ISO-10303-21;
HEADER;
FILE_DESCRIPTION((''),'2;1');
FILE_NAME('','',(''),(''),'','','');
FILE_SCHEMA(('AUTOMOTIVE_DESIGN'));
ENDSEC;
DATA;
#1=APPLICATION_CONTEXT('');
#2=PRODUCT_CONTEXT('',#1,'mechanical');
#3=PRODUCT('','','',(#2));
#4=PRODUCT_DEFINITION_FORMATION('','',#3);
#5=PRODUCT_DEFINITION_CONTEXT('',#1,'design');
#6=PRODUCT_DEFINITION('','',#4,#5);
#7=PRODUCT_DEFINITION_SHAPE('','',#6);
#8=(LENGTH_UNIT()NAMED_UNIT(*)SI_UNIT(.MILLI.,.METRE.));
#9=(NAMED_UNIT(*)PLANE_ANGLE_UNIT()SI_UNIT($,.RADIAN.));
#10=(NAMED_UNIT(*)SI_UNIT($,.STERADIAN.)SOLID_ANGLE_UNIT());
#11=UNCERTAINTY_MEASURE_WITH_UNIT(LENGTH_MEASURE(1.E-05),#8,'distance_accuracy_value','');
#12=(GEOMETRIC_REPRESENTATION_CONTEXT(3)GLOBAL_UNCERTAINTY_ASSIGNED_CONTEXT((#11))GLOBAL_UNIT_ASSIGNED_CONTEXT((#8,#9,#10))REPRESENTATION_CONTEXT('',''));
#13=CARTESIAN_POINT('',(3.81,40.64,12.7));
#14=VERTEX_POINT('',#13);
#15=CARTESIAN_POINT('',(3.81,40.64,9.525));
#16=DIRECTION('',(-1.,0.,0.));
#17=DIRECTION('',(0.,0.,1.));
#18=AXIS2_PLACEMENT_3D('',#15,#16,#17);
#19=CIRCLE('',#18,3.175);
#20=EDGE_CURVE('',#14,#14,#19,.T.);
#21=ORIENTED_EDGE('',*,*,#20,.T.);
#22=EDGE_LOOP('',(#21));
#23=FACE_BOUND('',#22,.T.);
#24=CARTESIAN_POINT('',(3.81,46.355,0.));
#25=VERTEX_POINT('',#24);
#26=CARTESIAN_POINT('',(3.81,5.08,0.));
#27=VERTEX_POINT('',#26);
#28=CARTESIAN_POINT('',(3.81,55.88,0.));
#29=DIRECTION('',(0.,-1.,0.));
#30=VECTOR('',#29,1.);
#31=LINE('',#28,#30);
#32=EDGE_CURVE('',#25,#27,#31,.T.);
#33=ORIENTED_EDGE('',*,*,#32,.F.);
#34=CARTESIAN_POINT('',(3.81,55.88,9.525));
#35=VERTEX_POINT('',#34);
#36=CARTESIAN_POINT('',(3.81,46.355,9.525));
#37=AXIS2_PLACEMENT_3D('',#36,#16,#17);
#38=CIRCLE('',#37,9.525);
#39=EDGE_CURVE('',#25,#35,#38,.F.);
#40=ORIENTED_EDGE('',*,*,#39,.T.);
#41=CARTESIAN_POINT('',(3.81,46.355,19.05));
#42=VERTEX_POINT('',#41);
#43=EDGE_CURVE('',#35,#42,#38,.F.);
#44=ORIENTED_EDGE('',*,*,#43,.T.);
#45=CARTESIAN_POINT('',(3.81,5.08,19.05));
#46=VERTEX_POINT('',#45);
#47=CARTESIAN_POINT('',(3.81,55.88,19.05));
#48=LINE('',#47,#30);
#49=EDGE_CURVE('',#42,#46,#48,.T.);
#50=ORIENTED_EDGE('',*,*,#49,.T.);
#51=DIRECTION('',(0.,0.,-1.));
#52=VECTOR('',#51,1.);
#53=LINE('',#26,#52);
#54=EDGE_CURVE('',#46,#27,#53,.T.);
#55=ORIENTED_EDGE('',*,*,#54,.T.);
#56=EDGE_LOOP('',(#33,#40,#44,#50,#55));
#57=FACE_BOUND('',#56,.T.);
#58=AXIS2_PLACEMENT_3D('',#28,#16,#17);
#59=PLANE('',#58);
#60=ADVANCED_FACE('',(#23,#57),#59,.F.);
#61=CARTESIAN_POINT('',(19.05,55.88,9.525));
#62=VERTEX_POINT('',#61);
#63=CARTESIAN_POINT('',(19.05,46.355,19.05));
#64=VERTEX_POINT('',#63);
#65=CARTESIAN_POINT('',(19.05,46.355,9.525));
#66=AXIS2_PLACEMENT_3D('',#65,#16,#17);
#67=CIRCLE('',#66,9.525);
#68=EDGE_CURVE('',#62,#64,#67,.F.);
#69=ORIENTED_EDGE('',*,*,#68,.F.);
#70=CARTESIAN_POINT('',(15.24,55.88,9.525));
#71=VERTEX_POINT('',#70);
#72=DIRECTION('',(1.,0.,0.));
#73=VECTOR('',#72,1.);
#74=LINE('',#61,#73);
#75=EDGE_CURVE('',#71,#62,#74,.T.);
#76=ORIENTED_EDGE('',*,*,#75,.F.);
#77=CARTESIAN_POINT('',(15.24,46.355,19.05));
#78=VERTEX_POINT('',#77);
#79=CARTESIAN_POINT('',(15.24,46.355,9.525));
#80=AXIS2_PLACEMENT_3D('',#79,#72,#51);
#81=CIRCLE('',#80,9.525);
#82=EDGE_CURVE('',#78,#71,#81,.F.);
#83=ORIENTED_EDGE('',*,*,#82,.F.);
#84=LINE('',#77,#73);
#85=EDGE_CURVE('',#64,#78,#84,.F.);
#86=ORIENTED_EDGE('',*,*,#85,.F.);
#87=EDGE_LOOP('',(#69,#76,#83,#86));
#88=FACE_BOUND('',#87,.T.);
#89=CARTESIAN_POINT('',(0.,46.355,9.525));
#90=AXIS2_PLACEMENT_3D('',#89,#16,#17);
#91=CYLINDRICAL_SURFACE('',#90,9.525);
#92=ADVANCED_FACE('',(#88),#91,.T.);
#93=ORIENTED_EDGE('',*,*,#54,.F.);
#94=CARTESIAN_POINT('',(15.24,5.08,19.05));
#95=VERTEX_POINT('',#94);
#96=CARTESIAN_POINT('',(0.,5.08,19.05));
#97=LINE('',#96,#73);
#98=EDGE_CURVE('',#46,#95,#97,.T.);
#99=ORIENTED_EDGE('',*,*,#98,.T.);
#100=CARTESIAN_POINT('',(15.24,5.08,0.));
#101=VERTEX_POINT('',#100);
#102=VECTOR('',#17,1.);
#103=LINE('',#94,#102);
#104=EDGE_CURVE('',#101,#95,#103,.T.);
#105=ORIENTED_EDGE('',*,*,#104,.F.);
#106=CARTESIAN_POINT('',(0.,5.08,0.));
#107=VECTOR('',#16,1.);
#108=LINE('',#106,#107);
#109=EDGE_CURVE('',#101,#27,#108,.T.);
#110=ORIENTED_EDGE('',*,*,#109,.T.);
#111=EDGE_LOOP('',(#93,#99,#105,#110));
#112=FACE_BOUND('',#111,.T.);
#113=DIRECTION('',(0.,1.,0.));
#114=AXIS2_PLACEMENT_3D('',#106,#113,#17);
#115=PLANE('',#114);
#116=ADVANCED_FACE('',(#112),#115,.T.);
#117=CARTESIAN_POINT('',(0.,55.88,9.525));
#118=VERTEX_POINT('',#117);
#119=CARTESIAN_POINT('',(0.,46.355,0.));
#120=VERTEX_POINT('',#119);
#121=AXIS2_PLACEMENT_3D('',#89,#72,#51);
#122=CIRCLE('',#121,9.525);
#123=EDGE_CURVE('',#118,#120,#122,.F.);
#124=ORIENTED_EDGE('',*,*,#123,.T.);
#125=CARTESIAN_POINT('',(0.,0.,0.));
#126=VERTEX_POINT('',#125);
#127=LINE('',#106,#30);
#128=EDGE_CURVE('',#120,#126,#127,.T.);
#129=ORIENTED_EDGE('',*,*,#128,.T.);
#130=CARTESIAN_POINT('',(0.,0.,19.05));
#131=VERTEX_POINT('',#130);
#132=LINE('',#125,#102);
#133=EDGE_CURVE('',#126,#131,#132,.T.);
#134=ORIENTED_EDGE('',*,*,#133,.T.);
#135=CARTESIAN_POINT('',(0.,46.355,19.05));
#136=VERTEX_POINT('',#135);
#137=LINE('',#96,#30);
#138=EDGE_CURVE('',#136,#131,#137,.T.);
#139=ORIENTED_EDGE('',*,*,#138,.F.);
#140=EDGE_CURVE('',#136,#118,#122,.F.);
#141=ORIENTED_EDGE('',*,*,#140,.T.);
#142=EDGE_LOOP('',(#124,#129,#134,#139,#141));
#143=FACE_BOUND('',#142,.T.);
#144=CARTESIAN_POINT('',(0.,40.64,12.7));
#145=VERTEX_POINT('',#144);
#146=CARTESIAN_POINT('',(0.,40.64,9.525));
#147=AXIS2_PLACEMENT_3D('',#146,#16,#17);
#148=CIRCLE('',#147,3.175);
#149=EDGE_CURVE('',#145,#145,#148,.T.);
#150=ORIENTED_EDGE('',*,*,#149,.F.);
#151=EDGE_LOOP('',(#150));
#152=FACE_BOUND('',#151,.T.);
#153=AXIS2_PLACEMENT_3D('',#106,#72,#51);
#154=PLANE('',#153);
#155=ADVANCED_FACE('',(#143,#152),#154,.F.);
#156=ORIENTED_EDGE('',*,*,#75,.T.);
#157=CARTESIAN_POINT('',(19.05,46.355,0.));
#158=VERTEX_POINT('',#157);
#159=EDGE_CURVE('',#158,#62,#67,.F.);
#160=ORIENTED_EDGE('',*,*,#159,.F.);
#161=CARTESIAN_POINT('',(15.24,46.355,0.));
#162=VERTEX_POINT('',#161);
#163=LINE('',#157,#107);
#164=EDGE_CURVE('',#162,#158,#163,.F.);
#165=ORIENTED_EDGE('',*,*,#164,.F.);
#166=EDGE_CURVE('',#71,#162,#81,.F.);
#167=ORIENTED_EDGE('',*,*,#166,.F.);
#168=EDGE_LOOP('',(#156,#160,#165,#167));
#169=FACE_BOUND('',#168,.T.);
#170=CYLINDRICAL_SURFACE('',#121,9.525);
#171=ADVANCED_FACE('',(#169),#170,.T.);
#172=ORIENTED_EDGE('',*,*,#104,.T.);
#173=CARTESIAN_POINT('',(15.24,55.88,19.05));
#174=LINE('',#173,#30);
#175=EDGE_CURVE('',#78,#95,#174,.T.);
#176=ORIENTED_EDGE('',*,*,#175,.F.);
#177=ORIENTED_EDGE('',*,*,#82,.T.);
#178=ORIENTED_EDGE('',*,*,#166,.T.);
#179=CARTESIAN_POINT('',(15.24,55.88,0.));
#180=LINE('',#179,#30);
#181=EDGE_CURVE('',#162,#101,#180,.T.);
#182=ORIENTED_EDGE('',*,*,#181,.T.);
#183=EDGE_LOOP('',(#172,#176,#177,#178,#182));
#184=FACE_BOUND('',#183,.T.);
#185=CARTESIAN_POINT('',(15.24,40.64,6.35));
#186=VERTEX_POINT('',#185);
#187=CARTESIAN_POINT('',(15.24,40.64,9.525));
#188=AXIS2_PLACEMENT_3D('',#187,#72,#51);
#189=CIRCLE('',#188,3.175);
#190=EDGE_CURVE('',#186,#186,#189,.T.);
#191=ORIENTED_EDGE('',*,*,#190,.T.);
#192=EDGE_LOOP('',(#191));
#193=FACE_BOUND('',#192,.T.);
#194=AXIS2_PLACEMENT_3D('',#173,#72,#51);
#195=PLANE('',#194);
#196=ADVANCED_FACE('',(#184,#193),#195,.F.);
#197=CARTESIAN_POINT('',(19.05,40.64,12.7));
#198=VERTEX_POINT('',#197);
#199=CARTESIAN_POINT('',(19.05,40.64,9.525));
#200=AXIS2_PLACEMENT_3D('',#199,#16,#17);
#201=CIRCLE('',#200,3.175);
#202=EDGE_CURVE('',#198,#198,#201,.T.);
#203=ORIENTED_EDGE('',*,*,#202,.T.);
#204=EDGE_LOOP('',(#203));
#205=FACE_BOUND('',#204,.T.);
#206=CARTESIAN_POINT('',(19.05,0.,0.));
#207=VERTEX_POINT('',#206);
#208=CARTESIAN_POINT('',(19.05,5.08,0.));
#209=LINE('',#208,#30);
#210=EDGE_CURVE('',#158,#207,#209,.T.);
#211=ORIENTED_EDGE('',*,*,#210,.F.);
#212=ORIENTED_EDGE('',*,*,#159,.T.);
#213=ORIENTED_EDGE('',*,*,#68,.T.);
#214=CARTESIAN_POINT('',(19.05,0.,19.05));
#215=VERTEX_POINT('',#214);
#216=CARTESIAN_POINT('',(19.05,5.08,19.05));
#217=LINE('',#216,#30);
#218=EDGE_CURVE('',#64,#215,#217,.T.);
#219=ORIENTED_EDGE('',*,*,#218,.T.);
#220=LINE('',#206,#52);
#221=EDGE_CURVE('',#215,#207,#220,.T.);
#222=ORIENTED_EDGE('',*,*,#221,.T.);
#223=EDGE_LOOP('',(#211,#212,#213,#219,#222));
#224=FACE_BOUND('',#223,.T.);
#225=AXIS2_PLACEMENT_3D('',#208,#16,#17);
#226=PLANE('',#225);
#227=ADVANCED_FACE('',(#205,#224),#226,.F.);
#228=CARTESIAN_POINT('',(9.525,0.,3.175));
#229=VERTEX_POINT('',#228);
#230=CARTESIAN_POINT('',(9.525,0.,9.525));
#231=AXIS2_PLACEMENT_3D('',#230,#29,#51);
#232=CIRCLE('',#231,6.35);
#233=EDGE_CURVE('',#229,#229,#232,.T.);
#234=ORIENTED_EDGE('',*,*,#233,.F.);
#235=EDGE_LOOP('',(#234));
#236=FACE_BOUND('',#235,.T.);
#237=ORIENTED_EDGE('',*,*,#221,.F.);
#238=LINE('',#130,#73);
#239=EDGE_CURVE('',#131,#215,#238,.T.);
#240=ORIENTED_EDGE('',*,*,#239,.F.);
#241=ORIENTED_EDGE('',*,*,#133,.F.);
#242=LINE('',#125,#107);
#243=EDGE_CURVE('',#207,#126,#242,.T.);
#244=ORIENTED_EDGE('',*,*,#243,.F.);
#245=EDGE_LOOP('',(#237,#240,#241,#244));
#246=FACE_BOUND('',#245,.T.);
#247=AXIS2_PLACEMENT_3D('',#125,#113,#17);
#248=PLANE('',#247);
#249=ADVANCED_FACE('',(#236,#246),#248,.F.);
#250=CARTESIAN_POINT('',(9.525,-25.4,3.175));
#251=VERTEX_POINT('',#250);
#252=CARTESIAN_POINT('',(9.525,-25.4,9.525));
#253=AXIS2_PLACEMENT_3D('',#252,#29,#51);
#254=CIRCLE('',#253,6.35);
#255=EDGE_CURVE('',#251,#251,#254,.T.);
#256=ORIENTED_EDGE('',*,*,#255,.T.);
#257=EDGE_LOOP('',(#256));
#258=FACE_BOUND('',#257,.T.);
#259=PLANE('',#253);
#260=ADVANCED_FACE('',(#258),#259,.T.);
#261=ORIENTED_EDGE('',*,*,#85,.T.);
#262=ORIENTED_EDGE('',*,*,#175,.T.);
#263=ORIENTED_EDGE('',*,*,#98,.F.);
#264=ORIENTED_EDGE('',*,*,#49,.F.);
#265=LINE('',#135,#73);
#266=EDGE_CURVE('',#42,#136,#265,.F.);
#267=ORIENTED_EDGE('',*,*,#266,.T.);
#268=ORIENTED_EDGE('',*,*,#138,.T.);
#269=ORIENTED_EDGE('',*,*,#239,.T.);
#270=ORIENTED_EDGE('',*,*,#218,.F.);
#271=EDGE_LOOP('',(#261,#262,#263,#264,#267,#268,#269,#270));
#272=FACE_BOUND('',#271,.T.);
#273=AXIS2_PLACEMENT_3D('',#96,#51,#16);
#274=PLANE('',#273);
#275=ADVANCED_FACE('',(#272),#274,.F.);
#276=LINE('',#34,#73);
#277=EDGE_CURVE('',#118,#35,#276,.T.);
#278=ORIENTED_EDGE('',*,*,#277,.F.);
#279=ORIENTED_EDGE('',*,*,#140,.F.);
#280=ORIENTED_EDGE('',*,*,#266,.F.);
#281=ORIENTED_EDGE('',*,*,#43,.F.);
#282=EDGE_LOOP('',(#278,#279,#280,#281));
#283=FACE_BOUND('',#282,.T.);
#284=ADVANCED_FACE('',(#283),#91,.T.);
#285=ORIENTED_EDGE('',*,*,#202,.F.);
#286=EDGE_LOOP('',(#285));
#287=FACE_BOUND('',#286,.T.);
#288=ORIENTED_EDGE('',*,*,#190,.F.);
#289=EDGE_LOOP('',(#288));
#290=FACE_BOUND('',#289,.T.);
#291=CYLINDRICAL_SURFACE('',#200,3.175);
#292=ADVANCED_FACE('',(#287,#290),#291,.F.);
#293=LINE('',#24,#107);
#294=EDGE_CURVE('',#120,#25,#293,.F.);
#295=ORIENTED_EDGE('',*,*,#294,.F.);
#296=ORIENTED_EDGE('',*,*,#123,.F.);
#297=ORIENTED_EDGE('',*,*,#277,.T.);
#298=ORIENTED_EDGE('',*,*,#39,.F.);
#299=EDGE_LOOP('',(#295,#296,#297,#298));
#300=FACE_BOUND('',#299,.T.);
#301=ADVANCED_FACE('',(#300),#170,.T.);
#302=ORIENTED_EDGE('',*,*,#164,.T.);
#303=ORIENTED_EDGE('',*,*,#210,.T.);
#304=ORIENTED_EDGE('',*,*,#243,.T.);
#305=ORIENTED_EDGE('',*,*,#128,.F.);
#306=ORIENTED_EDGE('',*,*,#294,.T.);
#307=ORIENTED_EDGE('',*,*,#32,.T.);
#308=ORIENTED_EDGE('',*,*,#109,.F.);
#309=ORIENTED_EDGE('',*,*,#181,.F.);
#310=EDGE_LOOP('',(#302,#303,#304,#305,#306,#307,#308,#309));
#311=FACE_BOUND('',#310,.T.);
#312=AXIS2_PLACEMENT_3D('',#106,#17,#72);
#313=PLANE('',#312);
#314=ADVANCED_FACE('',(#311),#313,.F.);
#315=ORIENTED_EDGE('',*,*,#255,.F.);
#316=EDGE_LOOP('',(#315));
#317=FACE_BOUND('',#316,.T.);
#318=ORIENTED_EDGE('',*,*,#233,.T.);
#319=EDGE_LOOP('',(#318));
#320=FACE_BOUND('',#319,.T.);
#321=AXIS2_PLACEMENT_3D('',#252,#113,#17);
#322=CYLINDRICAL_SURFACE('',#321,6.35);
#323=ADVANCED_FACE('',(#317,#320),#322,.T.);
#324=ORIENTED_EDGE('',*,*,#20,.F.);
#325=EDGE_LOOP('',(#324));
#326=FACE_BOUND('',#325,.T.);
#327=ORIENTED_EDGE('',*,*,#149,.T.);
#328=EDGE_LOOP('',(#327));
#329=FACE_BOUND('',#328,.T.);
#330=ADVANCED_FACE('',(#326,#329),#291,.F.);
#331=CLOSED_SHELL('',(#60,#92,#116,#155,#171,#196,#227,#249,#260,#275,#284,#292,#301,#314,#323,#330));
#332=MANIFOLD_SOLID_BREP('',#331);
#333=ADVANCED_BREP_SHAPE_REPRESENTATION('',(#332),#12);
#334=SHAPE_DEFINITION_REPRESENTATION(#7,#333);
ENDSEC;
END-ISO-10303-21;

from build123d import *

# Parameters (mm, degrees)
SKETCH1_W           = 19.05
SKETCH1_H           = 19.05
BOSS_EXTRUDE1_DEPTH = 5.08
SKETCH2_W           = 3.81
SKETCH2_H           = 19.05
BOSS_EXTRUDE2_DEPTH = 50.8
FILLET1_R           = 9.525
SKETCH3_R           = 3.175
CUT_EXTRUDE1_DEPTH  = 63.035307688
SKETCH4_R           = 6.35
BOSS_EXTRUDE3_DEPTH = 25.4


with BuildPart() as part:
    # Sketch1 → Boss-Extrude1 (new body)
    with BuildSketch(Plane(origin=(0, 0, 0), x_dir=(1, 0, 0), z_dir=(0, 1, 0))):
        with Locations((9.525, -9.525)):
            Rectangle(SKETCH1_W, SKETCH1_H)
    extrude(amount=BOSS_EXTRUDE1_DEPTH)

    # Sketch2 → Boss-Extrude2 (add)
    with BuildSketch(Plane(origin=(0, 5.08, 0), x_dir=(1, 0, 0), z_dir=(0, 1, 0))):
        with Locations((1.905, -9.525)):
            Rectangle(SKETCH2_W, SKETCH2_H)
        with Locations((17.145, -9.525)):
            Rectangle(SKETCH2_W, SKETCH2_H)
    extrude(amount=BOSS_EXTRUDE2_DEPTH)

    # Fillet1
    fillet1_edges = [part.edges().sort_by_distance(p)[0] for p in [
        (1.905, 55.88, 0),
        (17.145, 55.88, 0),
        (1.905, 55.88, 19.05),
        (17.145, 55.88, 19.05),
    ]]
    fillet(fillet1_edges, radius=FILLET1_R - 0.0001)  # a hair under: the kernel refuses the full size

    # Sketch3 → Cut-Extrude1 (cut, through all)
    with BuildSketch(Plane.ZY):
        with Locations((9.525, 40.64)):
            Circle(SKETCH3_R)
    extrude(amount=-CUT_EXTRUDE1_DEPTH, mode=Mode.SUBTRACT)

    # Sketch4 → Boss-Extrude3 (add)
    with BuildSketch(Plane.XZ):
        with Locations(Location((9.525, 9.525, 0), (0, 0, 270))):
            Circle(SKETCH4_R)
    extrude(amount=BOSS_EXTRUDE3_DEPTH)


solid = part.part
